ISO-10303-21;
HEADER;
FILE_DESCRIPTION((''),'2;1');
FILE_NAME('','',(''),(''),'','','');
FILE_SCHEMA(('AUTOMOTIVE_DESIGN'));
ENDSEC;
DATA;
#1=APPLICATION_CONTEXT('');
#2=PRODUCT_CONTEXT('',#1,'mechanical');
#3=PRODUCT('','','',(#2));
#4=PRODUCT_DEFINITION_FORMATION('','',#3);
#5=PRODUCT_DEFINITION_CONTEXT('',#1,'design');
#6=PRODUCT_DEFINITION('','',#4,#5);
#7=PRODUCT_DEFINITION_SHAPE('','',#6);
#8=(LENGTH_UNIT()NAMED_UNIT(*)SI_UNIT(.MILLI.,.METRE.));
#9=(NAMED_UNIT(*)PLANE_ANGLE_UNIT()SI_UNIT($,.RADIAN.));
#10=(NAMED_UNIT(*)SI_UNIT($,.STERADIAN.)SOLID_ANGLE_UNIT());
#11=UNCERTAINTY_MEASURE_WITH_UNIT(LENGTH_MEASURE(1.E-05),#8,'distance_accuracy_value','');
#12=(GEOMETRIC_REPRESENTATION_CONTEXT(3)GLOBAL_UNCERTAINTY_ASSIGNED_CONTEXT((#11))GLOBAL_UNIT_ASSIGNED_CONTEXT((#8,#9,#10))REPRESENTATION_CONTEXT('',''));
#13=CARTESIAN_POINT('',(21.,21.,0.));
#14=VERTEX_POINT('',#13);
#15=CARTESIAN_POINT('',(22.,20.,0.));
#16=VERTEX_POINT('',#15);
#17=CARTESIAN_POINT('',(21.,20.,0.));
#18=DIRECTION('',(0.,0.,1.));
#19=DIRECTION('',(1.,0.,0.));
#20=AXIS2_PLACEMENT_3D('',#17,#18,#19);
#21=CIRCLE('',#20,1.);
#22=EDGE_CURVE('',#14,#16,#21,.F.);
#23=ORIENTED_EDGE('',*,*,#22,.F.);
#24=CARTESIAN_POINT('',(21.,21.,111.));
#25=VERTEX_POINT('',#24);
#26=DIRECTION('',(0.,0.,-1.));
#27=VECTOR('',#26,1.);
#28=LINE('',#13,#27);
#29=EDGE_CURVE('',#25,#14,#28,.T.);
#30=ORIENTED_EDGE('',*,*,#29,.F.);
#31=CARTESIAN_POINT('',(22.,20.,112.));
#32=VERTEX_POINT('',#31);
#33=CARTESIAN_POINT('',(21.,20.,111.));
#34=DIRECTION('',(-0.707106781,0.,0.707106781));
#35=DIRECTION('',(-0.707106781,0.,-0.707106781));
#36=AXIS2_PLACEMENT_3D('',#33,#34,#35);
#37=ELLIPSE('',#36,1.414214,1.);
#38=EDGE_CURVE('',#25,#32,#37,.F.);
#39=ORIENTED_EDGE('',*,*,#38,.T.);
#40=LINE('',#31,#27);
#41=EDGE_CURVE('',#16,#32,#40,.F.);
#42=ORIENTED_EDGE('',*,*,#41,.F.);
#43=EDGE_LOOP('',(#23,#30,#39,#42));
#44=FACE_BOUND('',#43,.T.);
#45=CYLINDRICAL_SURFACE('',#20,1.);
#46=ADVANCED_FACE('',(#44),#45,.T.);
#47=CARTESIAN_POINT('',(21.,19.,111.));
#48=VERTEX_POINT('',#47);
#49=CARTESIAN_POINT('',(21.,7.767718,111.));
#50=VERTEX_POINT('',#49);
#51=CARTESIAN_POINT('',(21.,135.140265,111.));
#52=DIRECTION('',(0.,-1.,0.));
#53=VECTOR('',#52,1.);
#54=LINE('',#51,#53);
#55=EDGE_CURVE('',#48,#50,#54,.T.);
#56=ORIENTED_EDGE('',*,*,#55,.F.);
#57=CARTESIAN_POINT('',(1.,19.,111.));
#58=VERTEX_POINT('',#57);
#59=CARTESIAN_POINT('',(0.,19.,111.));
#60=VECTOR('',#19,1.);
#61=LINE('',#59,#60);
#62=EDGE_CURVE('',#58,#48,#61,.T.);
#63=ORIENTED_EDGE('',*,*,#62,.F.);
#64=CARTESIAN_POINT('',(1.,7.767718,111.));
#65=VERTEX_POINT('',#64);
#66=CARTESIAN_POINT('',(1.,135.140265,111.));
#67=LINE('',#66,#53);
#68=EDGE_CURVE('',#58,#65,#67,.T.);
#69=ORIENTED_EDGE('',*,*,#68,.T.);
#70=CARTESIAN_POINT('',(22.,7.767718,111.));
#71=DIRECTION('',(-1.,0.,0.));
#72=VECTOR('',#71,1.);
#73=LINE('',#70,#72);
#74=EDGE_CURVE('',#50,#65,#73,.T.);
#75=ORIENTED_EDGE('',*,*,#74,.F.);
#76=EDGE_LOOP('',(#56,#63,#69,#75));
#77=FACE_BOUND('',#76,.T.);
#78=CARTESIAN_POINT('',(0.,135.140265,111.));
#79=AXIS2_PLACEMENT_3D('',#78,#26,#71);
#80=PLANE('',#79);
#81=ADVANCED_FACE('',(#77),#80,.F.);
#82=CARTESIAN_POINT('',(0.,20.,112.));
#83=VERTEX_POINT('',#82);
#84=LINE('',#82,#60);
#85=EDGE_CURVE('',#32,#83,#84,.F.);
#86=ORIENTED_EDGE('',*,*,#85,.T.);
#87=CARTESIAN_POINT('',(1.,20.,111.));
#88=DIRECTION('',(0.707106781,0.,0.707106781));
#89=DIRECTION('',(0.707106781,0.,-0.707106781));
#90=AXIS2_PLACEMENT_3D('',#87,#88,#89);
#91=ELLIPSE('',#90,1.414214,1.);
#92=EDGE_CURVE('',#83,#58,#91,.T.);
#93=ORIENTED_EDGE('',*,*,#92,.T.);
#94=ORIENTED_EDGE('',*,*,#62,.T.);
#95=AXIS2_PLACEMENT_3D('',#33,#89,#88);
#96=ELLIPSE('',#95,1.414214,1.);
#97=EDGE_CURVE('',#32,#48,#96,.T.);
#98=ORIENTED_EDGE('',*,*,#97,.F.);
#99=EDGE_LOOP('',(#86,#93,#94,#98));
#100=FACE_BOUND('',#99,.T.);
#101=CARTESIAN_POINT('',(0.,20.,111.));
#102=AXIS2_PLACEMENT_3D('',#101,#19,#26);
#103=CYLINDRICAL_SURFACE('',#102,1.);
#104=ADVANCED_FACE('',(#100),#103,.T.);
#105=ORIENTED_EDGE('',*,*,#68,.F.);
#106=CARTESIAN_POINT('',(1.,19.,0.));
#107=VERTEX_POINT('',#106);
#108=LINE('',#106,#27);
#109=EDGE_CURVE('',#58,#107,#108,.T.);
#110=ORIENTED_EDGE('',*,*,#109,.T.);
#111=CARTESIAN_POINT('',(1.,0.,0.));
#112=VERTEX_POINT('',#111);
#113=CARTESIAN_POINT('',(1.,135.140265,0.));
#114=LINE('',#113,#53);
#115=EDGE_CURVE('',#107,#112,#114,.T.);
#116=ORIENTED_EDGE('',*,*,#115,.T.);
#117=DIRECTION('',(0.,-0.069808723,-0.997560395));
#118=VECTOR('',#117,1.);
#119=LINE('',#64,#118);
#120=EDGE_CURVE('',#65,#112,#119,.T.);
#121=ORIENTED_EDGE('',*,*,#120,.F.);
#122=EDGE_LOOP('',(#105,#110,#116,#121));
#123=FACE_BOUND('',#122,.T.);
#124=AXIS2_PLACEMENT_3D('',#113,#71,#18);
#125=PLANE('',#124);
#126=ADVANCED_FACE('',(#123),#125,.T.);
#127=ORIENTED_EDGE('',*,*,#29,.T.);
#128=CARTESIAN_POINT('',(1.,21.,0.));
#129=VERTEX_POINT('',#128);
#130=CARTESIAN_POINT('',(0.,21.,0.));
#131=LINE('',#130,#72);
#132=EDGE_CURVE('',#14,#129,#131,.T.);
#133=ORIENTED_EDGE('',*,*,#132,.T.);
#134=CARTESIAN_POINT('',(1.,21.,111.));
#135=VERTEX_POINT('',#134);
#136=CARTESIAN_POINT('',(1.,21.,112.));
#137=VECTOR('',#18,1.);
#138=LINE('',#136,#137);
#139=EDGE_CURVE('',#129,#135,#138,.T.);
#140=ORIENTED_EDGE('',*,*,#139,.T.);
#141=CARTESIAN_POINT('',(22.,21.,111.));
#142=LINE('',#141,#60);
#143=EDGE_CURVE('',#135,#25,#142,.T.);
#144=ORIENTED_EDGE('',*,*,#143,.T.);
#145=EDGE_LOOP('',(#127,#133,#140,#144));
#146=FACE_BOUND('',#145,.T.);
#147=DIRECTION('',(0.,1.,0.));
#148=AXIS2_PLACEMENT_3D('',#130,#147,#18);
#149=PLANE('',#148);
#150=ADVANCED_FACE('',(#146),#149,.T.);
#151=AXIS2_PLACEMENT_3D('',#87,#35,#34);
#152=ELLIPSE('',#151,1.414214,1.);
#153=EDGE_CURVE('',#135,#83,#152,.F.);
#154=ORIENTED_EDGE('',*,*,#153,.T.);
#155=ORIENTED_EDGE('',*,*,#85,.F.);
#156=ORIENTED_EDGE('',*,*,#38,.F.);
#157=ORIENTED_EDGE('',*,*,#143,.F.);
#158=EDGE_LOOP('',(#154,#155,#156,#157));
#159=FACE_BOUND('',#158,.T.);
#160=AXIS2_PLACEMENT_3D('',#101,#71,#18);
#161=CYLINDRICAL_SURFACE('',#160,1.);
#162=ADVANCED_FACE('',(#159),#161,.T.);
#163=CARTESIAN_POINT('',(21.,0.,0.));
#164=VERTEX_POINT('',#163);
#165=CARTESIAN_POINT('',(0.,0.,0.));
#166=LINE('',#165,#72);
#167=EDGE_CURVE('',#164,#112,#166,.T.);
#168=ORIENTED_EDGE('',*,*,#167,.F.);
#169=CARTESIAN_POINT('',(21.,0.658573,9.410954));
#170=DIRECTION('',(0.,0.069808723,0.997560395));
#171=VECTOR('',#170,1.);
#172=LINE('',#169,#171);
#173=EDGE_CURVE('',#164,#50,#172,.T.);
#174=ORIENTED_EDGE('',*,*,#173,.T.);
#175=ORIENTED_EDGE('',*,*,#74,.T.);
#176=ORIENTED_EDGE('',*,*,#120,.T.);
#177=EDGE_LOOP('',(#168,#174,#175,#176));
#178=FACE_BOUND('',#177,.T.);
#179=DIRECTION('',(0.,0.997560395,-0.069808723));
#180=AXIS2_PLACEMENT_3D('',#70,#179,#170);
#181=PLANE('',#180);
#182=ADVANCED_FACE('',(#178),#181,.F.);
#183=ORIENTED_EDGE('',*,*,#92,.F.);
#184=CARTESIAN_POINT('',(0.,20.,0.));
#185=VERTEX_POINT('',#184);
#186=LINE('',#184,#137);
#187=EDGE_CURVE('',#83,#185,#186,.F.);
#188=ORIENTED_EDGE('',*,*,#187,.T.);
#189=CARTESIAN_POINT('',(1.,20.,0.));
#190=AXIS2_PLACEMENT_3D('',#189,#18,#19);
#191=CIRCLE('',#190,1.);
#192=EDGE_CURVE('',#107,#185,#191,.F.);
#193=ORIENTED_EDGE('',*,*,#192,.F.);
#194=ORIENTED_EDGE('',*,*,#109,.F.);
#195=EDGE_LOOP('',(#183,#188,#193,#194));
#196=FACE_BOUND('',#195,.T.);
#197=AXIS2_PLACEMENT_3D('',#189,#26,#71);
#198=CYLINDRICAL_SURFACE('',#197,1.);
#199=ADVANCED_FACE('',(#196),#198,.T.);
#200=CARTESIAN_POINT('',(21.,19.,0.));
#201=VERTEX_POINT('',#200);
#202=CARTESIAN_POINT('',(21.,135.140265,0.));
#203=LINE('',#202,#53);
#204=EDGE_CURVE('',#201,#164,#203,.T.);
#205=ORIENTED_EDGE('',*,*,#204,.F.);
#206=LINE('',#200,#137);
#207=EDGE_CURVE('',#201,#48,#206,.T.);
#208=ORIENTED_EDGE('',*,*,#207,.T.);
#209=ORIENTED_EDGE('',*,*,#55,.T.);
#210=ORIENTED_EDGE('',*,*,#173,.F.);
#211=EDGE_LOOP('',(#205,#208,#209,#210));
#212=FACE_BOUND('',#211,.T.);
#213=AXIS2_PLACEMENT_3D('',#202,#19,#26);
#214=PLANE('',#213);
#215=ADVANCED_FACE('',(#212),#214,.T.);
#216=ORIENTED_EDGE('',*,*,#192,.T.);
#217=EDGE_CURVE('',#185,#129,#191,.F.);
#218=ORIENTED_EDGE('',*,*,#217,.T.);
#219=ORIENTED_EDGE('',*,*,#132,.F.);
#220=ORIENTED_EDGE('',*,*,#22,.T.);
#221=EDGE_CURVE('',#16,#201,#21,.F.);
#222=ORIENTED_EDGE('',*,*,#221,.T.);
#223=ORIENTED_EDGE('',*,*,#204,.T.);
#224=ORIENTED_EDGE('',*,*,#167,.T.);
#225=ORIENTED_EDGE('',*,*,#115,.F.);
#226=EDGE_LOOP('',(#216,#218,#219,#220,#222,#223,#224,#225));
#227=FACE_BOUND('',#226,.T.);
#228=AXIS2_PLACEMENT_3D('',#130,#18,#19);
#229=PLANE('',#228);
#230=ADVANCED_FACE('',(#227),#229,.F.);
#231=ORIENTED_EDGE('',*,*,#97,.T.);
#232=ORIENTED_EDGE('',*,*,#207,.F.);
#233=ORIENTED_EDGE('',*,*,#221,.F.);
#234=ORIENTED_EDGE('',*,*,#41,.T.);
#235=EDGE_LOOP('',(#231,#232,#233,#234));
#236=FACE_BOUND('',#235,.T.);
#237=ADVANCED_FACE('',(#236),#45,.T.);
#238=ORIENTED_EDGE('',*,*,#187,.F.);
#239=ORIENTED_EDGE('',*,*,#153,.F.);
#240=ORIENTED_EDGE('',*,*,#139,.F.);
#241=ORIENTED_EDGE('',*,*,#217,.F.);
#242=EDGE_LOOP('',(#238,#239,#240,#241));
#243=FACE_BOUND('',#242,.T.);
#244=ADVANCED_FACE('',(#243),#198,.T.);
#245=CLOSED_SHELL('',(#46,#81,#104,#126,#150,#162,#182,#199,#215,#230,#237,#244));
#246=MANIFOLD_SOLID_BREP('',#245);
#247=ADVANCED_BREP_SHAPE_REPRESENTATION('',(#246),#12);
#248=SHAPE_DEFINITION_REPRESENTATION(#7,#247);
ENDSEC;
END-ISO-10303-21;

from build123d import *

# Parameters (mm, degrees)
SKETCH1_W           = 22
SKETCH1_H           = 112
BOSS_EXTRUDE1_DEPTH = 21
CUT_EXTRUDE1_DEPTH  = 19
FILLET1_START       = -1
FILLET1_DEPTH       = 113
FILLET1_2_DEPTH     = 113
FILLET1_3_DEPTH     = 24
CUT_EXTRUDE11_DEPTH = 116.870617501


with BuildPart() as part:
    # Sketch1 → Boss-Extrude1 (new body)
    with BuildSketch(Plane(origin=(0, 0, 0), x_dir=(1, 0, 0), z_dir=(0, 1, 0))):
        with Locations((11, -56)):
            Rectangle(SKETCH1_W, SKETCH1_H)
    extrude(amount=BOSS_EXTRUDE1_DEPTH)

    # Sketch2 → Cut-Extrude1 (cut)
    with BuildSketch(Plane.XZ):
        Polygon((0, 112), (22, 112), (22, 0), (21, 0), (21, 111), (1, 111), (1, 0), (0, 0), align=None)
    extrude(amount=-CUT_EXTRUDE1_DEPTH, mode=Mode.SUBTRACT)

    # Fillet1: read off the stored shape, not the designer's step
    # Fillet1 outline → Fillet1 (cut)
    with BuildSketch(Plane.XY.offset(FILLET1_START)):
        with BuildLine():
            Line((0, 19), (1, 19))
            ThreePointArc((1, 19), (0.292893219, 19.292893219), (0, 20))
            Line((0, 20), (0, 19))
        make_face()
        with BuildLine():
            ThreePointArc((22, 20), (21.707106781, 19.292893219), (21, 19))
            Line((21, 19), (22, 19))
            Line((22, 19), (22, 20))
        make_face()
    extrude(amount=FILLET1_DEPTH, mode=Mode.SUBTRACT)

    # Fillet1 2 outline → Fillet1 2 (cut)
    with BuildSketch(Plane.XY.offset(FILLET1_START)):
        with BuildLine():
            Line((0, 21), (0, 20))
            ThreePointArc((0, 20), (0.292893219, 20.707106781), (1, 21))
            Line((1, 21), (0, 21))
        make_face()
        with BuildLine():
            Line((22, 21), (21, 21))
            ThreePointArc((21, 21), (21.707106781, 20.707106781), (22, 20))
            Line((22, 20), (22, 21))
        make_face()
    extrude(amount=FILLET1_2_DEPTH, mode=Mode.SUBTRACT)

    # Fillet1 3 outline → Fillet1 3 (cut)
    with BuildSketch(Plane.YZ.offset(FILLET1_START)):
        with BuildLine():
            Line((21, 112), (20, 112))
            ThreePointArc((20, 112), (20.707106781, 111.707106781), (21, 111))
            Line((21, 111), (21, 112))
        make_face()
        with BuildLine():
            ThreePointArc((19, 111), (19.292893219, 111.707106781), (20, 112))
            Line((20, 112), (19, 112))
            Line((19, 112), (19, 111))
        make_face()
    extrude(amount=FILLET1_3_DEPTH, mode=Mode.SUBTRACT)

    # Sketch11 → Cut-Extrude11 (cut, through all)
    with BuildSketch(Plane.ZY.offset(-1)):
        Polygon((0, 0), (111, 0), (111, 7.767718463), align=None)
    extrude(amount=-CUT_EXTRUDE11_DEPTH, mode=Mode.SUBTRACT)


solid = part.part
